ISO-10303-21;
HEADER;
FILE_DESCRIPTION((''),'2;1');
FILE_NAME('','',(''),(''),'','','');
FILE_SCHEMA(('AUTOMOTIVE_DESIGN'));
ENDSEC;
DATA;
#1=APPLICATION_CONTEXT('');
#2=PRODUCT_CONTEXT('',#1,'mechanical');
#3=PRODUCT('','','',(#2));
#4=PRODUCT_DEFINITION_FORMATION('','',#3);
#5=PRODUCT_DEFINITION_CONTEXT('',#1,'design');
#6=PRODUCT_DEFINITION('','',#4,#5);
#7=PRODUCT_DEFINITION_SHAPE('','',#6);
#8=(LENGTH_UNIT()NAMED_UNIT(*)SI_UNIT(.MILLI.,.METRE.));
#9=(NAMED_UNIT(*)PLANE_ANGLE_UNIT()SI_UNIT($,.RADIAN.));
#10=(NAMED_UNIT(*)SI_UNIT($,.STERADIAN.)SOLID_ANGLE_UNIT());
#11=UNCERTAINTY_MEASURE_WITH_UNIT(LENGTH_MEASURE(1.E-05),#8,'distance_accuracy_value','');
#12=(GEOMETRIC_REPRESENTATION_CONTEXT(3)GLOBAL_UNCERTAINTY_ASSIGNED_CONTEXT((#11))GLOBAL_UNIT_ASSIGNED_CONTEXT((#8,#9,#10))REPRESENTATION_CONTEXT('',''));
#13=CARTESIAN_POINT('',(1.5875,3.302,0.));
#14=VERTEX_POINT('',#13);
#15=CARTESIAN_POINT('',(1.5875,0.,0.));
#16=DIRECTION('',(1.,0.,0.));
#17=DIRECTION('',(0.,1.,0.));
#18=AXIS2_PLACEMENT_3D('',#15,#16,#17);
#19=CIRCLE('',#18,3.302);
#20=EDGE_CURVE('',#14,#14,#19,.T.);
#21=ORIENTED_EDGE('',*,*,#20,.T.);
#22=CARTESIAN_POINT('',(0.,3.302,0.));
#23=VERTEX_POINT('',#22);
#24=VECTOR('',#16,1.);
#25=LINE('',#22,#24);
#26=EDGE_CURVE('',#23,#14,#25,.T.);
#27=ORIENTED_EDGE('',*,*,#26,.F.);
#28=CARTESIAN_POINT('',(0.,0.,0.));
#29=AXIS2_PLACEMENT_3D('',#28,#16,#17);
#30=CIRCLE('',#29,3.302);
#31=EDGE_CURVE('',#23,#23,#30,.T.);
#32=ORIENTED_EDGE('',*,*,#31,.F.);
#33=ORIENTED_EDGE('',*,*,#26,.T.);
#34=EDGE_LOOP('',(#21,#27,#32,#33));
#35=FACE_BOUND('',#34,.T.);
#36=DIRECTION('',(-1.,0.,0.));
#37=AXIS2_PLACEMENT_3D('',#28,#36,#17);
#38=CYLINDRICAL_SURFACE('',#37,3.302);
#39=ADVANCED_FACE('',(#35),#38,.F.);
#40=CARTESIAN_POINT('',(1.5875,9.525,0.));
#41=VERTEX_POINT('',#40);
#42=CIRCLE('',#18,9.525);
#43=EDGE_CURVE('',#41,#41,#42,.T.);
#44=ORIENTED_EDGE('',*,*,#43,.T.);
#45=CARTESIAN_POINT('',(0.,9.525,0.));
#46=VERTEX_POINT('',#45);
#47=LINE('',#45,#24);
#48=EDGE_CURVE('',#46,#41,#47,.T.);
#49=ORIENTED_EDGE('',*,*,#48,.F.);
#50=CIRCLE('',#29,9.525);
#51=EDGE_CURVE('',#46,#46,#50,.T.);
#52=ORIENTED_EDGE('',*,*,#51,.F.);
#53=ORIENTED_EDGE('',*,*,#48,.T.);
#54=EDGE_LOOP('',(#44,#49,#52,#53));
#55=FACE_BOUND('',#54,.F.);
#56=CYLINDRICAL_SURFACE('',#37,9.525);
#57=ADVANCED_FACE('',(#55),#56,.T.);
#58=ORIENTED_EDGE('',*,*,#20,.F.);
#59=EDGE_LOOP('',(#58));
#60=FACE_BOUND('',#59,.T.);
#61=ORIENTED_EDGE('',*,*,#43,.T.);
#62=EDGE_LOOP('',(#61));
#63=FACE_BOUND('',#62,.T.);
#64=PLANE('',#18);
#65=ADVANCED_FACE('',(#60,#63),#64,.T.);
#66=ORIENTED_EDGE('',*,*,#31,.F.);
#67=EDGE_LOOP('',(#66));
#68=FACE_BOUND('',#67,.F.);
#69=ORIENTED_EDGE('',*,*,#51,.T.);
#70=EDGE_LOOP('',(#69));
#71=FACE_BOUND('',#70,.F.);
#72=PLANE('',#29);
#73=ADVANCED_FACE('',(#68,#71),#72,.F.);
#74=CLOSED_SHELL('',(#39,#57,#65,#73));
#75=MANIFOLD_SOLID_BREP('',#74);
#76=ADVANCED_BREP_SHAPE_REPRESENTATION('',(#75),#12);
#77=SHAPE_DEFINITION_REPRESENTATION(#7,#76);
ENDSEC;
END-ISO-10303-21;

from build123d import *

# Parameters (mm, degrees)
F0_R     = 9.525
F0_R_2   = 3.302
F1_DEPTH = 1.5875


# Not quite as in the source:
# - a length typed as a fraction of an inch, garbled in the dataset ("3 / 203.2 mm" for 3/8 in), is restored


with BuildPart() as f1:
    # F0 (on Right) → F1 (new body)
    with BuildSketch(Plane.YZ):
        Circle(F0_R)
        Circle(F0_R_2, mode=Mode.SUBTRACT)
    extrude(amount=F1_DEPTH)


solid = f1.part
